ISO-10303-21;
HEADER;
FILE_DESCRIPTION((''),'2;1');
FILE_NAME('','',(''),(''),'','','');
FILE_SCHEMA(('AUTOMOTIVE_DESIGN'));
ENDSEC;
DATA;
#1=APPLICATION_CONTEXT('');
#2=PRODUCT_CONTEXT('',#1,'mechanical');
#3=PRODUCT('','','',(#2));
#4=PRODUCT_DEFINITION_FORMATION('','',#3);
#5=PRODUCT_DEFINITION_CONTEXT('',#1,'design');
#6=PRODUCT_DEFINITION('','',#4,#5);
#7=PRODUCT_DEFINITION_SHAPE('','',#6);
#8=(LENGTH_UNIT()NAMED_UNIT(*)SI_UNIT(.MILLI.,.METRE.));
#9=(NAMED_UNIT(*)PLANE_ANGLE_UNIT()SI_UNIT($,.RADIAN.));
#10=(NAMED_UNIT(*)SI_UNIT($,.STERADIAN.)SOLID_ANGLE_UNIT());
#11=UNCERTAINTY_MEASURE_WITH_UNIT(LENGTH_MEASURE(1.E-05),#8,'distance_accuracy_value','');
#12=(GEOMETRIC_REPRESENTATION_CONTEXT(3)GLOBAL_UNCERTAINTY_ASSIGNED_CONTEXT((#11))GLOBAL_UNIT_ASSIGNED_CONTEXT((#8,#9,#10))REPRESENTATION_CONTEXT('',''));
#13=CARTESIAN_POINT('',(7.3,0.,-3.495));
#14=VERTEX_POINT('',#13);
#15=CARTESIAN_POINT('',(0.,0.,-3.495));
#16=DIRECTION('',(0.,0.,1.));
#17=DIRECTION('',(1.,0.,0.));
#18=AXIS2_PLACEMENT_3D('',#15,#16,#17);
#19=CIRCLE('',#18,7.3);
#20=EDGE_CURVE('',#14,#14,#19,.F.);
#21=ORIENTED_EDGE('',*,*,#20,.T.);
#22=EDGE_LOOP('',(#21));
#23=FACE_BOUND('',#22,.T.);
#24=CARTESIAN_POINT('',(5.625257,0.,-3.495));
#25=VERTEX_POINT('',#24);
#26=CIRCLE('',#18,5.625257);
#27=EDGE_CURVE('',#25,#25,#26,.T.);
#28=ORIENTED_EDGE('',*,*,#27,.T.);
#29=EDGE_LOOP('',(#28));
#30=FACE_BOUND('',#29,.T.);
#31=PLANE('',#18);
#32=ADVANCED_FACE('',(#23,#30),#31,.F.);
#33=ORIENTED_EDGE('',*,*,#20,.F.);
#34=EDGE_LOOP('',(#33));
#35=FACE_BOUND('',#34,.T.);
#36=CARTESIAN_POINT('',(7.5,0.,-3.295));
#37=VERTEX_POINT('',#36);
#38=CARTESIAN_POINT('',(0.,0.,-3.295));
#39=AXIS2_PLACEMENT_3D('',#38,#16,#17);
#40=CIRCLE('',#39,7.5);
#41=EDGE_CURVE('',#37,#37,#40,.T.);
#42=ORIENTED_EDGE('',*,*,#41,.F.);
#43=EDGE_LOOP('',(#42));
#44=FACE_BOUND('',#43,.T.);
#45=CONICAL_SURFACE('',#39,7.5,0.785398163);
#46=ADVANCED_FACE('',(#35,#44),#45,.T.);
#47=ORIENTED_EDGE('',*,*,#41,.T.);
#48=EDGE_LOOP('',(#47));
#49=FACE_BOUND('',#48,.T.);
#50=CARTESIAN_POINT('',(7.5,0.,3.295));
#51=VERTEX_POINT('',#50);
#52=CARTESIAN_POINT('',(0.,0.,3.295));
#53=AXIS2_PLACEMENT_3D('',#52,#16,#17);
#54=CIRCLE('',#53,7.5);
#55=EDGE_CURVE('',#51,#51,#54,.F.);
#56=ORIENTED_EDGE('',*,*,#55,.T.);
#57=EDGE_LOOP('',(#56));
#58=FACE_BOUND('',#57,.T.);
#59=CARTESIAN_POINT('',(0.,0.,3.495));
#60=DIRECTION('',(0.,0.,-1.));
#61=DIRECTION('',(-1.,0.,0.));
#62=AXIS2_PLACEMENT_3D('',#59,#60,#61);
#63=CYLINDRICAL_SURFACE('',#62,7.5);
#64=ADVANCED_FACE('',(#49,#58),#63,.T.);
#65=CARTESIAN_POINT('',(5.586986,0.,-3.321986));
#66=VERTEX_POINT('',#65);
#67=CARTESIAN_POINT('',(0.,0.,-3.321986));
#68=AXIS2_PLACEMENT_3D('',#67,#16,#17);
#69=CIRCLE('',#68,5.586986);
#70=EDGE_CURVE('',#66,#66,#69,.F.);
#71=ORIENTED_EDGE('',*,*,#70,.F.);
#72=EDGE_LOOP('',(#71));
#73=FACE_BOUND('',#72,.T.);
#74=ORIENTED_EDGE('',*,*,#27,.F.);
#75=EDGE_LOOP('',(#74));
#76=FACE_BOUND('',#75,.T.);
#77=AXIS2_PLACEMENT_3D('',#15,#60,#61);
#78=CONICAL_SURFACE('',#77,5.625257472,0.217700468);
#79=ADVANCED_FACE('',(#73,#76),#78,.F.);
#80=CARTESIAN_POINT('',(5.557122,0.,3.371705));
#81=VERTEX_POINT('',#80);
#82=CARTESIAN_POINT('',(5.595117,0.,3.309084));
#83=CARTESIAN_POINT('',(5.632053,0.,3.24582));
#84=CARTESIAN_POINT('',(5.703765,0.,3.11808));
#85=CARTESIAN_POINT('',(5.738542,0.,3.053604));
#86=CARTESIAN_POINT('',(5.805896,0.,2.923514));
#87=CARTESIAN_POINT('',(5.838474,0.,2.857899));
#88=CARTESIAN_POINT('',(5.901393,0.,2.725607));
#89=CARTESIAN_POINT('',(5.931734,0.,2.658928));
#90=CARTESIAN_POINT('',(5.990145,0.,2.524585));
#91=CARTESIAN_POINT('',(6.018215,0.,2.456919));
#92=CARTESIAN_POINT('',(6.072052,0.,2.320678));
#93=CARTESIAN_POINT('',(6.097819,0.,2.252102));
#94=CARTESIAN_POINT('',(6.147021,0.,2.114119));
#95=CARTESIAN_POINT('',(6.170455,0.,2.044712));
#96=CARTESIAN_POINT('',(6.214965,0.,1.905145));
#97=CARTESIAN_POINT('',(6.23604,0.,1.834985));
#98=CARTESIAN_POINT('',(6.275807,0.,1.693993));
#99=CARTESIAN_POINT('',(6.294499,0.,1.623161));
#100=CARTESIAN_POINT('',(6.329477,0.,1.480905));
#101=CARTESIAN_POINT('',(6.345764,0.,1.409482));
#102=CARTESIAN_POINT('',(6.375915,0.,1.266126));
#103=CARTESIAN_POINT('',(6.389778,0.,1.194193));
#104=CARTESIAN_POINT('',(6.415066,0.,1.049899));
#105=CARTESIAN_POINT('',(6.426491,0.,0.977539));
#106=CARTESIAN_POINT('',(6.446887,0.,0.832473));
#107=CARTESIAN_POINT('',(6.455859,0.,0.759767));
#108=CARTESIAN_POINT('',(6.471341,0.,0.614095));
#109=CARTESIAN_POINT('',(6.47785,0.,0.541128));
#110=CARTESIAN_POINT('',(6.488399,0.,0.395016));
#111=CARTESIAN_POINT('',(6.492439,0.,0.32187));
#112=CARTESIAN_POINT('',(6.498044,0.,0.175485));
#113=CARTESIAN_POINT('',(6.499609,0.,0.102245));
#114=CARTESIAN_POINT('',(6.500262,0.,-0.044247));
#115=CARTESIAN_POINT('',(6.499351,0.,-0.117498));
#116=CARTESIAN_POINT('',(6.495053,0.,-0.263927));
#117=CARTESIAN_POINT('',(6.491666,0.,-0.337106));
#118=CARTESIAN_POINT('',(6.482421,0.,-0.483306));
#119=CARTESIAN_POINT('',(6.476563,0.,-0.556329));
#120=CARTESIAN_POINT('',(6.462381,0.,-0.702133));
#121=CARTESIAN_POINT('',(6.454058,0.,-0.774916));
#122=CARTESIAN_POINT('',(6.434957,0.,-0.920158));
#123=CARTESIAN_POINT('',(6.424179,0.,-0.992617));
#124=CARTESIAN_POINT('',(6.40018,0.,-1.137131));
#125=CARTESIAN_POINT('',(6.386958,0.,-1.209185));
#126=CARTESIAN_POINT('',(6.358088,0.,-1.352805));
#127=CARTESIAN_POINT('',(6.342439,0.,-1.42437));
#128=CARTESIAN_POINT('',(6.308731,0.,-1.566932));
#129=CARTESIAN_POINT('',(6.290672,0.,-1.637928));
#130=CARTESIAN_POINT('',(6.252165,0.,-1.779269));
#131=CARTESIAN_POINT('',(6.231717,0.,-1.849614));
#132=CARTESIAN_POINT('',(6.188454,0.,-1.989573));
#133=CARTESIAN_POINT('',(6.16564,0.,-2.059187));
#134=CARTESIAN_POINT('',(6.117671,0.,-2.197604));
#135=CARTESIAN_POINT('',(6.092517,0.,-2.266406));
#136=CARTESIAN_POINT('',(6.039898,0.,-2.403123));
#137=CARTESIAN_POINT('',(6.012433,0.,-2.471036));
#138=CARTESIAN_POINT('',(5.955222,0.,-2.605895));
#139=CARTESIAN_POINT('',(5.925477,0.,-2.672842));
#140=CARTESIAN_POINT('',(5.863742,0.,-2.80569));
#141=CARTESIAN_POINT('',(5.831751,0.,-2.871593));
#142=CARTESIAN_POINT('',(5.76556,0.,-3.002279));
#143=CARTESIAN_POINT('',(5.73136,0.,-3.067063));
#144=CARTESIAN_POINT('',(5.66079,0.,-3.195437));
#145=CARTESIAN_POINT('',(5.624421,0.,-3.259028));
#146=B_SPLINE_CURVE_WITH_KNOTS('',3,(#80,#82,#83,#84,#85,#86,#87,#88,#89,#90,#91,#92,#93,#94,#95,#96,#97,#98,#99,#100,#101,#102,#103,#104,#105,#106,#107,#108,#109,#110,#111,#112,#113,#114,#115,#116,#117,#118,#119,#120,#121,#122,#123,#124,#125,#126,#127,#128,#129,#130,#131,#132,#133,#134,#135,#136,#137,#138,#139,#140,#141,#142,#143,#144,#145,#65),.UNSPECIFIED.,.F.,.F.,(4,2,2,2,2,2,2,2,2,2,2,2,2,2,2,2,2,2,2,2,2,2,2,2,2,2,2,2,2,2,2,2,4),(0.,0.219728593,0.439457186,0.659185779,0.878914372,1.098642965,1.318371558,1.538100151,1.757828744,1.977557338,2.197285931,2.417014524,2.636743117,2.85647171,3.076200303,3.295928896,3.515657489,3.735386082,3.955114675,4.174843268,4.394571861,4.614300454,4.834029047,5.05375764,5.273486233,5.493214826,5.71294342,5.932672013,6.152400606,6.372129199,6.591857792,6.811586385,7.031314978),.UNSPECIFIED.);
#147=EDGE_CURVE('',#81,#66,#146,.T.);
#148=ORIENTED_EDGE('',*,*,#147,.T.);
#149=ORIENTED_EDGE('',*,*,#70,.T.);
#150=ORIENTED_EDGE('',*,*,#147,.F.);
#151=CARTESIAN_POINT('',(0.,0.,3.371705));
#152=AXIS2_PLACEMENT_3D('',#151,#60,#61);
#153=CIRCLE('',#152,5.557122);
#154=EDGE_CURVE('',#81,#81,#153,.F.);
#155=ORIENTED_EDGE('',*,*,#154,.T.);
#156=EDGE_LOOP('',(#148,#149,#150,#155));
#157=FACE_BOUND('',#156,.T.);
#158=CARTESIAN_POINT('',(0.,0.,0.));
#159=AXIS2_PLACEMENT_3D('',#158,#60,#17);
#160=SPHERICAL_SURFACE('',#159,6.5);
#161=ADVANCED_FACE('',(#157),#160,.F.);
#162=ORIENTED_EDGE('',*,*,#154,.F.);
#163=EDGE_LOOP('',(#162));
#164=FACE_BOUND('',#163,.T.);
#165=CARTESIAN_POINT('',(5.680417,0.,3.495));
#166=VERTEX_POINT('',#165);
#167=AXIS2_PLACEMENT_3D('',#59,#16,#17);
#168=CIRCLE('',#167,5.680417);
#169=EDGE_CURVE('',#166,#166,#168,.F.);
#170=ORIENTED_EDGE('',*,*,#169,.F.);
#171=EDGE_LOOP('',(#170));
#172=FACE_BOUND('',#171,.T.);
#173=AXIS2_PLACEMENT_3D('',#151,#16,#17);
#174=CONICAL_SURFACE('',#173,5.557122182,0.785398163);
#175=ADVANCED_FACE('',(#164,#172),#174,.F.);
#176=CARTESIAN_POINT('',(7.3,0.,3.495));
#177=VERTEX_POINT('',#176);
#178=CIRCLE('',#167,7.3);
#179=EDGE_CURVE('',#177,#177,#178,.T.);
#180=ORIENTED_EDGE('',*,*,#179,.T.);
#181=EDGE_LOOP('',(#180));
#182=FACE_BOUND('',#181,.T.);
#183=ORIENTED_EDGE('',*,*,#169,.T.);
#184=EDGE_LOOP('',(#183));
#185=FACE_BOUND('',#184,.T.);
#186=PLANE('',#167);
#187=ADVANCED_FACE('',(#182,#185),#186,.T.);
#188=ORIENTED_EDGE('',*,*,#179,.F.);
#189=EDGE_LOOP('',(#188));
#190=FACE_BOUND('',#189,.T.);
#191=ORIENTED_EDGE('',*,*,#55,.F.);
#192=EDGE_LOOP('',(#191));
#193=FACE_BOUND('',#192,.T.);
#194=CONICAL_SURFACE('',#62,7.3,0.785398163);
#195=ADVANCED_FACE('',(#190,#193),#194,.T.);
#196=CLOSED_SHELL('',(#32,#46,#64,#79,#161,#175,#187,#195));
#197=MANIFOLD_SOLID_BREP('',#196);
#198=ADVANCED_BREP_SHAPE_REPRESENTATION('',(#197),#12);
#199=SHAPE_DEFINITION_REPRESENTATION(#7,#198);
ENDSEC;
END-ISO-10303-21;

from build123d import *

# Parameters (mm, degrees)
ESTRUSIONE1_DEPTH      = 3.495
ESTRUSIONE1_DEPTH_BACK = 3.495
SCHIZZO1_R             = 7.5
SMUSSO1_SIZE           = 0.2
SMUSSO1_SIZE_2         = 0.14484006


with BuildPart() as part:
    # Schizzo1 → Estrusione1 (new, two sides: drawn at the far end of the back side and taken through both)
    with BuildSketch(Plane.XY.offset(-ESTRUSIONE1_DEPTH_BACK)):
        Circle(SCHIZZO1_R)
    extrude(amount=ESTRUSIONE1_DEPTH + ESTRUSIONE1_DEPTH_BACK)

    # Schizzo2 → Taglia-Rivoluzione1 (revolve, cut)
    with BuildSketch(Plane(origin=(0, 0, 0), x_dir=(1, 0, 0), z_dir=(0, 1, 0))):
        with BuildLine():
            Line((0, 6.5), (0, -6.5))
            ThreePointArc((0, -6.5), (-6.5, 0), (0, 6.5))
        make_face()
    revolve(axis=Axis((0, 0, -4.815448708), (0, 0, 1)), mode=Mode.SUBTRACT)

    # Smusso1
    # the kernel refuses this chamfer: 0.2, 0.14484006 mm, written as the material it takes off along each edge
    with BuildSketch(Plane(origin=(0, 0, -3.495), x_dir=(1, 0, 0), z_dir=(0, -1, 0))) as smusso1_piece_1:
        Polygon((7.5, SMUSSO1_SIZE), (7.5 - SMUSSO1_SIZE, 0), (7.5, 0), align=None)
    revolve(axis=Axis((0, 0, -3.495), (0, 0, 1)), mode=Mode.SUBTRACT)
    with BuildSketch(Plane(origin=(0, 0, 3.495), x_dir=(1, 0, 0), z_dir=(0, -1, 0))) as smusso1_piece_2:
        Polygon((7.5, -SMUSSO1_SIZE), (7.5 - SMUSSO1_SIZE, 0), (7.5, 0), align=None)
    revolve(axis=Axis((0, 0, 3.495), (0, 0, 1)), mode=Mode.SUBTRACT)
    with BuildSketch(Plane(origin=(0, 0, 3.495), x_dir=(-1, 0, 0), z_dir=(0, -1, 0))) as smusso1_piece_3:
        with BuildLine():
            Line((5.480417411 + SMUSSO1_SIZE, 0), (5.557122182, 0.12329523))
            ThreePointArc((5.557122182, 0.12329523), (5.519593752, 0.062204519), (5.480417411, 0))
            Line((5.480417411, 0), (5.480417411 + SMUSSO1_SIZE, 0))
        make_face()
    revolve(axis=Axis((0, 0, 3.495), (0, 0, -1)), mode=Mode.SUBTRACT)
    with BuildSketch(Plane(origin=(0, 0, -3.495), x_dir=(-1, 0, 0), z_dir=(0, -1, 0))) as smusso1_piece_4:
        with BuildLine():
            Line((5.480417411 + SMUSSO1_SIZE_2 * 1.00000000281, 0), (5.586985705, -0.173014037))
            ThreePointArc((5.586985705, -0.173014037), (5.535884344, -0.088537827), (5.480417411, 0))
            Line((5.480417411, 0), (5.480417411 + SMUSSO1_SIZE_2 * 1.00000000281, 0))
        make_face()
    revolve(axis=Axis((0, 0, -3.495), (0, 0, -1)), mode=Mode.SUBTRACT)


solid = part.part
